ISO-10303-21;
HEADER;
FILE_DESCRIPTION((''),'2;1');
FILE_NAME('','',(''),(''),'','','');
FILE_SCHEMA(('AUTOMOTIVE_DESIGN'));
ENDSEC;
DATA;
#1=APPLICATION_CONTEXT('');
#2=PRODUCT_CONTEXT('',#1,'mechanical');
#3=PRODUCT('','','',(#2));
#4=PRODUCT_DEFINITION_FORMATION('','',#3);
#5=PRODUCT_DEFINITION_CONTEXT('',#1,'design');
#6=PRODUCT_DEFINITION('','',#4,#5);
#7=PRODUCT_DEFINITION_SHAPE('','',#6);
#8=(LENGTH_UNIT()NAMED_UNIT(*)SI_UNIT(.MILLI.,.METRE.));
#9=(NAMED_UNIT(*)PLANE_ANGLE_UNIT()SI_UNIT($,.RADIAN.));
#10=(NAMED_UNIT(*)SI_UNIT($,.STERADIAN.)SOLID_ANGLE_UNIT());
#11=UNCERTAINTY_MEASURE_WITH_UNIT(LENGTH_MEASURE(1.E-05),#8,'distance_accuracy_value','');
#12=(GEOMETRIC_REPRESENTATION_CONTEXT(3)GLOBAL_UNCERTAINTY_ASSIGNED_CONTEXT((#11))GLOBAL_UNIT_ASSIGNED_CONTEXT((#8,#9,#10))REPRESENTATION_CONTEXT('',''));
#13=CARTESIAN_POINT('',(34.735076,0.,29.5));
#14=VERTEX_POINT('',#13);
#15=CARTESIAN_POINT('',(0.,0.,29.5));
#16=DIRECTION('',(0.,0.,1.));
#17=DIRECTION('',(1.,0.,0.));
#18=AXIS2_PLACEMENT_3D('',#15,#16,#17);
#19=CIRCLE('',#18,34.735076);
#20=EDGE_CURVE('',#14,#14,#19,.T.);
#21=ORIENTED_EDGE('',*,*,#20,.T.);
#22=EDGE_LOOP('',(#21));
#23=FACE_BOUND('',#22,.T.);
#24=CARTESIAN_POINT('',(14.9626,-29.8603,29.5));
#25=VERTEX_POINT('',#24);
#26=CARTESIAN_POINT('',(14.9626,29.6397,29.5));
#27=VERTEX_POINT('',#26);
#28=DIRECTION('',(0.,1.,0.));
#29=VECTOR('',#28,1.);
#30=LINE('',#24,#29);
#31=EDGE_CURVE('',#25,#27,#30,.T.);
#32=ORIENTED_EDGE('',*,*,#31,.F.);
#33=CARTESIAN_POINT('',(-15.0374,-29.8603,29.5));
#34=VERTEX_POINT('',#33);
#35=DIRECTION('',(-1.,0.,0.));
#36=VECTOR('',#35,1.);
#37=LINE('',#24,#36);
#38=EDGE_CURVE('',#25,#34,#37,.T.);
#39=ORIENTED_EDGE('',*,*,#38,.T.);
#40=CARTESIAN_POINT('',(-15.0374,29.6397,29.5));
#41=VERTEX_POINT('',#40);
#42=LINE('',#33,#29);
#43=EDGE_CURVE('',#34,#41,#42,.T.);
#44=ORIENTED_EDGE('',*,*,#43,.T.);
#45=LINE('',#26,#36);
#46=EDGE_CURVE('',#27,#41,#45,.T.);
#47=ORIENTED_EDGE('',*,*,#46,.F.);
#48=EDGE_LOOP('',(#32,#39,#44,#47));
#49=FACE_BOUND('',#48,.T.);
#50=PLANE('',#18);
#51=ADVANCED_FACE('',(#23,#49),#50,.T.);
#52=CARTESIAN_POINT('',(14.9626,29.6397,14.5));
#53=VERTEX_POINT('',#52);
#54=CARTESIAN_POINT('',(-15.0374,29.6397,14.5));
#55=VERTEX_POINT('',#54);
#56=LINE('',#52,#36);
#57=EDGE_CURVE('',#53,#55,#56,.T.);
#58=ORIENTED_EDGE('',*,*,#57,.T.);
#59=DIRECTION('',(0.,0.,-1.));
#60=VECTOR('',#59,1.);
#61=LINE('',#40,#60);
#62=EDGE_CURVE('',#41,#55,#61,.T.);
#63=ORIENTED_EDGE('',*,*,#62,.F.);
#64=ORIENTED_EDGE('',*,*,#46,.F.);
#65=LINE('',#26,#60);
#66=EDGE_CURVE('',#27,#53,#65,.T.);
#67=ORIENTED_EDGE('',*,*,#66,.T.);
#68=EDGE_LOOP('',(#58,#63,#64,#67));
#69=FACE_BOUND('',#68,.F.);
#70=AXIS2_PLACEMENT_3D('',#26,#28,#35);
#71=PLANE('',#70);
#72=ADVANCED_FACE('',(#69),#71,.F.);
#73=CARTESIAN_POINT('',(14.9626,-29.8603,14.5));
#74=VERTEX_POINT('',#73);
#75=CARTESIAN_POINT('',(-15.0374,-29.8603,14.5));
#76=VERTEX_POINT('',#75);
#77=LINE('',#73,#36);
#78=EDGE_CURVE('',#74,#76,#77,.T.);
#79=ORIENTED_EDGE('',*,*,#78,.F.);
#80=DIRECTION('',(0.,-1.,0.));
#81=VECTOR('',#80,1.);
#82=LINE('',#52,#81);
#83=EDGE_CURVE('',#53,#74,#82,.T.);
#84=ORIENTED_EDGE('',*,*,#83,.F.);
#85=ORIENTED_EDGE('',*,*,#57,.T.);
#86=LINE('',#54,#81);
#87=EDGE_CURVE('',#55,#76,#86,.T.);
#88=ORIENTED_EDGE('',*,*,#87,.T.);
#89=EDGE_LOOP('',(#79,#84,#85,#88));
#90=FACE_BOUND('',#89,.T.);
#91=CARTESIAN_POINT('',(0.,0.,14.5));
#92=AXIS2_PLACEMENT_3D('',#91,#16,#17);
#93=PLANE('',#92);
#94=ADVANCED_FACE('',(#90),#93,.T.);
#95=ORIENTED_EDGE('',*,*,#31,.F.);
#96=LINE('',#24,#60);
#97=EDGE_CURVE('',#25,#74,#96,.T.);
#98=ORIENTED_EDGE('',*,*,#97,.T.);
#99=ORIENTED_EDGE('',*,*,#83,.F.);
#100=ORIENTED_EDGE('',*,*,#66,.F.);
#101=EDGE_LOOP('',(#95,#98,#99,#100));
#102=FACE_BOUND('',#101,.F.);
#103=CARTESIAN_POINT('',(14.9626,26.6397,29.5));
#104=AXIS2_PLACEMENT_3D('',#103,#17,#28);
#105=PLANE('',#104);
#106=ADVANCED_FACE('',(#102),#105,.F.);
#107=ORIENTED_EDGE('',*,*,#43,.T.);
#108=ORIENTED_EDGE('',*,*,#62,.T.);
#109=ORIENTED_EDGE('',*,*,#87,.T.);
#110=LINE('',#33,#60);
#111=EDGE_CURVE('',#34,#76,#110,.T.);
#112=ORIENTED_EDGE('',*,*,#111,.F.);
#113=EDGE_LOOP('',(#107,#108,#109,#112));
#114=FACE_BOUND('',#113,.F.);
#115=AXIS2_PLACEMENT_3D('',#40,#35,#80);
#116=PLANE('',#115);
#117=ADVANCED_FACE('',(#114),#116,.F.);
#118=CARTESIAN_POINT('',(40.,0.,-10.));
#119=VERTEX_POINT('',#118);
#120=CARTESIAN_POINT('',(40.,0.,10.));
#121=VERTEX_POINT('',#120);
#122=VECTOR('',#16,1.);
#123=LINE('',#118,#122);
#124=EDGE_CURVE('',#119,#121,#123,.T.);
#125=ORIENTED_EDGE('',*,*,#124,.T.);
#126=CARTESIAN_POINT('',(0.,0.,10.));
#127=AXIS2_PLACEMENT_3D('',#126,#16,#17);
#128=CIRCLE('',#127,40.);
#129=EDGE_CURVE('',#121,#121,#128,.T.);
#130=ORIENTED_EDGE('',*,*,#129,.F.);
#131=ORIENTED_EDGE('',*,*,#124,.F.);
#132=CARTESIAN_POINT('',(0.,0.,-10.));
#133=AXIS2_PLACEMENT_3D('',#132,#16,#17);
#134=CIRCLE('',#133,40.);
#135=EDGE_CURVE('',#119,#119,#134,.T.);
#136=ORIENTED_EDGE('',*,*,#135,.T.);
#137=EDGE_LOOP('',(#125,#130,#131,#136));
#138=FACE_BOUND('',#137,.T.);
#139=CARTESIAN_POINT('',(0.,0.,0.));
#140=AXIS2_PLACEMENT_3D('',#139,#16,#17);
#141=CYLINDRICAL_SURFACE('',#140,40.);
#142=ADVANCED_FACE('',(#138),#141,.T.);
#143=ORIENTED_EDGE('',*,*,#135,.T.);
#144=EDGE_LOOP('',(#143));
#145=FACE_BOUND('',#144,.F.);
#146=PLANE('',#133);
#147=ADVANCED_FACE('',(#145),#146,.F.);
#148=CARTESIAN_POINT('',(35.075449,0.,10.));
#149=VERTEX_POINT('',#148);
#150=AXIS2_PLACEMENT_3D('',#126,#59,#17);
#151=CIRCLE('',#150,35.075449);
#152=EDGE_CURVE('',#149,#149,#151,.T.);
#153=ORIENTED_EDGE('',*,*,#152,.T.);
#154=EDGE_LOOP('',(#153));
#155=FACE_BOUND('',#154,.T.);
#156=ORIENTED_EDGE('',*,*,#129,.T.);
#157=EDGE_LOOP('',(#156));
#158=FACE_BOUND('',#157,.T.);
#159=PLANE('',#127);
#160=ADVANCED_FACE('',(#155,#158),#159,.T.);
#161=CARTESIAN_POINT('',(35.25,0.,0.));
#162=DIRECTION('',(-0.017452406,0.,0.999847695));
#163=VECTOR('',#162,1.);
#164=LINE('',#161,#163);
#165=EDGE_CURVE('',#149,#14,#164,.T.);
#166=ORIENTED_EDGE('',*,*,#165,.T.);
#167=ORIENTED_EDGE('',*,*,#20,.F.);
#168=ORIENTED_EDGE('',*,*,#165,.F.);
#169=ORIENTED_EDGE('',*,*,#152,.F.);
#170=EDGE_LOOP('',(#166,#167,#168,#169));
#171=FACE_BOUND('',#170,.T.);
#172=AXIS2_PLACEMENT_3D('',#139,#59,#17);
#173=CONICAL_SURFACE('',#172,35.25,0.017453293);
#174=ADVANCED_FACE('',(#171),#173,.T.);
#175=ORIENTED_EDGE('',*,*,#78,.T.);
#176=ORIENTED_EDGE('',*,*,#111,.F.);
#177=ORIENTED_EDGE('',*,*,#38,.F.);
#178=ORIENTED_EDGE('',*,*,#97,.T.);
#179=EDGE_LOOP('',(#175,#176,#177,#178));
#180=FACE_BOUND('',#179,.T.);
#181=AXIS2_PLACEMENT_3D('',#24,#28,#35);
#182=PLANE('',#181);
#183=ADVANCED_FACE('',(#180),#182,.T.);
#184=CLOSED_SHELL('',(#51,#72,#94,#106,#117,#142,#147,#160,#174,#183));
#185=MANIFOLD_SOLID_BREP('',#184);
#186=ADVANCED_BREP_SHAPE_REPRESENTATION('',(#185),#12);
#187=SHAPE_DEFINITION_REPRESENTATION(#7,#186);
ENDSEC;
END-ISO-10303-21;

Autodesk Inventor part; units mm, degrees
ref_plane "YZ Plane" through (0, 0, 0) normal (1, 0, 0) x (0, 1, 0)
ref_plane "XZ Plane" through (0, 0, 0) normal (0, 1, 0) x (-1, 0, 0)
ref_plane "XY Plane" through (0, 0, 0) normal (0, 0, 1) x (1, 0, 0)
sketch "Sketch1" plane through (0, 0, 0) normal (0, 0, 1) x (1, 0, 0)
  circle A0 centre (0, 0) radius 35.25
  circle A1 centre (0, 0) radius 40
  dimension "d0" = 70.5
  dimension "d4" = 80
extrude "Extrusion1" add sketch "Sketch1" along normal blind 29.5 contours A0
draft "FaceDraft1" angle 1 pull direction (0, 0, 1) faces at (35.144, -2.7316, 19.6667) fixed edges at (-35.25, 0, 0)
extrude "Extrusion2" add sketch "Sketch1" along normal mid plane 20 contours A0 | A1
sketch "Skizze2" plane through (0, 0, 29.5) normal (0, 0, 1) x (1, 0, 0)
  circle A0 centre (0, 0) radius 34.7351 projected
  line L0 (-21.0374, 27.6397) -> (-15.0374, 27.6397)
  line L1 (-15.0374, 27.6397) -> (-15.0374, 26.6397)
  line L2 (-15.0374, 26.6397) -> (-21.0374, 26.6397)
  line L3 (-21.0374, 26.6397) -> (-21.0374, 27.6397)
  line L4 (-15.0374, 26.6397) -> (14.9626, 26.6397)
  line L5 (14.9626, 26.6397) -> (14.9626, -29.8603)
  line L6 (14.9626, -29.8603) -> (-15.0374, -29.8603)
  line L7 (-15.0374, -29.8603) -> (-15.0374, 26.6397)
  line L8 (-15.0374, 26.6397) -> (14.9626, 26.6397)
  line L9 (14.9626, 26.6397) -> (14.9626, 29.6397)
  line L10 (14.9626, 29.6397) -> (-15.0374, 29.6397)
  line L11 (-15.0374, 29.6397) -> (-15.0374, 26.6397)
  dimension "d7" = 6
  dimension "d8" = 1
  dimension "d9" = 30
  dimension "d10" = 56.5
  dimension "d11" = 3
extrude "Extrusion3" cut sketch "Skizze2" against normal blind 15 contours L11 L10 L9 L4 L1 | L4 L5 L6 L7
properties part number "stopfen-front" material "yellow foam"
